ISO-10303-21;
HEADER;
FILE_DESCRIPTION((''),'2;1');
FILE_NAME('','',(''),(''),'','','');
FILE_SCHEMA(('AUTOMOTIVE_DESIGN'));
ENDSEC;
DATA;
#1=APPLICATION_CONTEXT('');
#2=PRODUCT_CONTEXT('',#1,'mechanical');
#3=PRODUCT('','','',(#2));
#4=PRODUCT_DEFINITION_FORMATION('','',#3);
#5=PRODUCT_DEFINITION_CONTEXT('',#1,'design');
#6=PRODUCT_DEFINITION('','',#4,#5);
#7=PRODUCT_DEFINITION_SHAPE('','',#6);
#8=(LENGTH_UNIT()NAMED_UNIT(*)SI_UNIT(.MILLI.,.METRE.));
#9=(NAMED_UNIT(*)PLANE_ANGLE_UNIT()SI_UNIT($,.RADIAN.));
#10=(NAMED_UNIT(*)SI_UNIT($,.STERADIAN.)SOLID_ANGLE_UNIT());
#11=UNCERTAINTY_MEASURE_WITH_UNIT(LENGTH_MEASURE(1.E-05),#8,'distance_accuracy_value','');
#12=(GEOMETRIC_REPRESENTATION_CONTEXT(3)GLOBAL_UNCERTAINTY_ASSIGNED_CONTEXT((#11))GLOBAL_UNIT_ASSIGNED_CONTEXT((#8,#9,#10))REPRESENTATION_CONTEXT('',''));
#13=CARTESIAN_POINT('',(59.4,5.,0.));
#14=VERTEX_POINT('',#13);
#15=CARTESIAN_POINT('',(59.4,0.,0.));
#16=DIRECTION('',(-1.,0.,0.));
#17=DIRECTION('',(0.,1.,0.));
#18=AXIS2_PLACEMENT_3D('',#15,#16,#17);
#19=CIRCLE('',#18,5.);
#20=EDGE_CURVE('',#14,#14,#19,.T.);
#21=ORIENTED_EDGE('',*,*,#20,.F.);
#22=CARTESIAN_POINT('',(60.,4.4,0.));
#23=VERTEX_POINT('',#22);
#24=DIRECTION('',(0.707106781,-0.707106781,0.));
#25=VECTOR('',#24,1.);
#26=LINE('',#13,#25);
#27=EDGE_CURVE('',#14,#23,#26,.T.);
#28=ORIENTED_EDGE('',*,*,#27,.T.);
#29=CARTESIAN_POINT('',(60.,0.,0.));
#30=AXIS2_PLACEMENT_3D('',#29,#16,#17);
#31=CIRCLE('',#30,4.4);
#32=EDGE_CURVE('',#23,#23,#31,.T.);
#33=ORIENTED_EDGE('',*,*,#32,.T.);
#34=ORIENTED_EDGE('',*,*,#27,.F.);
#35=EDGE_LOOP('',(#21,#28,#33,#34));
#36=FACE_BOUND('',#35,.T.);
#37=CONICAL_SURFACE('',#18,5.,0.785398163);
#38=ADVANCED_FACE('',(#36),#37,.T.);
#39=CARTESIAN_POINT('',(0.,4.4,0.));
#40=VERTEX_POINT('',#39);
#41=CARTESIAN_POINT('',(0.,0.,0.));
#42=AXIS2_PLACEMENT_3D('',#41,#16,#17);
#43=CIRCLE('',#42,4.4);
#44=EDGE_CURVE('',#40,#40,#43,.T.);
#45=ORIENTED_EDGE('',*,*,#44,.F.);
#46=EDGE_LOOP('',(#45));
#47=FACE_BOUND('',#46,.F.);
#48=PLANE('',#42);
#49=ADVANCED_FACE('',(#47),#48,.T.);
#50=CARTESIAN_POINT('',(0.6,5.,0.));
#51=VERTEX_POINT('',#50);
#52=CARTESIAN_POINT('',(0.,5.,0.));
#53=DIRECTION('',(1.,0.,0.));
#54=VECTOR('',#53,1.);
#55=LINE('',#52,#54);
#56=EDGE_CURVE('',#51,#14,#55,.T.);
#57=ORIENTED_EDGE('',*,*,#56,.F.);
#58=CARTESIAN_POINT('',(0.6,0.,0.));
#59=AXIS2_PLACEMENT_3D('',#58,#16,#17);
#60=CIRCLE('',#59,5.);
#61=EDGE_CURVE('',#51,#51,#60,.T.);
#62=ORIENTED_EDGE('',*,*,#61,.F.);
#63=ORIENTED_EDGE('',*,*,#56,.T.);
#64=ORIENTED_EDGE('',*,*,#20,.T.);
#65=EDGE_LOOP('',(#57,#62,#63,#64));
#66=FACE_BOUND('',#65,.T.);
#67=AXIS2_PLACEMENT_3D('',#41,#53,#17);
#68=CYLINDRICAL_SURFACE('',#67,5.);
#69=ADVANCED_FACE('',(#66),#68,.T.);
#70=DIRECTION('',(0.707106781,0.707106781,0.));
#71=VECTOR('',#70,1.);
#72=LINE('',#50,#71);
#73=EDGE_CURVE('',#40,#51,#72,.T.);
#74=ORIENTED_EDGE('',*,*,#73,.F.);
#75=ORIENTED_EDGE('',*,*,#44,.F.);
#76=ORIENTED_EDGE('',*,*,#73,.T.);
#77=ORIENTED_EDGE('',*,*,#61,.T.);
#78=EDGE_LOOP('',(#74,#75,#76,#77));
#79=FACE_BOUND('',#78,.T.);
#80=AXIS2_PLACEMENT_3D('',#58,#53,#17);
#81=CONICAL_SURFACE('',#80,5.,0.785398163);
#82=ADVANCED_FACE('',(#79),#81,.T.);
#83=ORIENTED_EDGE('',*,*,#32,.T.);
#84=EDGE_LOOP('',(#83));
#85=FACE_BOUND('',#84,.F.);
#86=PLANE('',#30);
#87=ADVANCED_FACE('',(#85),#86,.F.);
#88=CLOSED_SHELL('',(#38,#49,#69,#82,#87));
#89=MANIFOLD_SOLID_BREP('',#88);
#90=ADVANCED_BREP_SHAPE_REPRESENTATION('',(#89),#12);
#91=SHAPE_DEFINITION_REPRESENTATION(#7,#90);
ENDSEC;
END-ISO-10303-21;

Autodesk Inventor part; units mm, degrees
ref_plane "XZ Plane" through (0, 0, 0) normal (0, 1, 0) x (-1, 0, 0)
ref_plane "XY Plane" through (0, 0, 0) normal (0, 0, 1) x (1, 0, 0)
sketch "Sketch1" plane through (0, 0, 0) normal (0, 0, 1) x (1, 0, 0)
  line L0 (0, 0) -> (0, 5)
  line L1 (0, 5) -> (60, 5)
  line L2 (60, 5) -> (60, 0)
  line L3 (60, 0) -> (0, 0)
  dimension "d3" = 10
  dimension "d58" = 60
revolve "Вращение1" add sketch "Sketch1" angle 360 about axis through (60, 0, 0) along (-1, 0, 0)
thread "Резьба1" size "M10x1.25" class "6g" standard "ISO Metric profile" length 60
thread "Резьба2" size "M10x1.25" class "6g" standard "ISO Metric profile" length 60
chamfer "Фаска1" distance 0.6 angle 45 2 edges at (60, -5, 0) (0, -5, 0)
ref_plane "Work Plane1" through (60, 0, 0) normal (1, 0, 0) x (0, 1, 0)
sketch "Sketch2" plane through (60, 0, 0) normal (1, 0, 0) x (0, 1, 0)
  circle A0 centre (0, 0) radius 5
  dimension "d60" = 10
boundary_patch "Участок поверхности1"
equation "\"d49\" = b"
equation "\"d51\" = b"
equation "\"d53\" = chamfer"
equation "\"d3\" = d"
equation "\"d58\" = L"
equation "\"chamfer\" = 0.6"
equation "\"d\" = 10"
equation "\"L\" = 60"
equation "\"b\" = 60"
equation "\"Grip_Length\" = 0"
properties part number "Шпилька M10×1.25-8g×60 ГОСТ 22042-76" material "Сталь, мягкая"
